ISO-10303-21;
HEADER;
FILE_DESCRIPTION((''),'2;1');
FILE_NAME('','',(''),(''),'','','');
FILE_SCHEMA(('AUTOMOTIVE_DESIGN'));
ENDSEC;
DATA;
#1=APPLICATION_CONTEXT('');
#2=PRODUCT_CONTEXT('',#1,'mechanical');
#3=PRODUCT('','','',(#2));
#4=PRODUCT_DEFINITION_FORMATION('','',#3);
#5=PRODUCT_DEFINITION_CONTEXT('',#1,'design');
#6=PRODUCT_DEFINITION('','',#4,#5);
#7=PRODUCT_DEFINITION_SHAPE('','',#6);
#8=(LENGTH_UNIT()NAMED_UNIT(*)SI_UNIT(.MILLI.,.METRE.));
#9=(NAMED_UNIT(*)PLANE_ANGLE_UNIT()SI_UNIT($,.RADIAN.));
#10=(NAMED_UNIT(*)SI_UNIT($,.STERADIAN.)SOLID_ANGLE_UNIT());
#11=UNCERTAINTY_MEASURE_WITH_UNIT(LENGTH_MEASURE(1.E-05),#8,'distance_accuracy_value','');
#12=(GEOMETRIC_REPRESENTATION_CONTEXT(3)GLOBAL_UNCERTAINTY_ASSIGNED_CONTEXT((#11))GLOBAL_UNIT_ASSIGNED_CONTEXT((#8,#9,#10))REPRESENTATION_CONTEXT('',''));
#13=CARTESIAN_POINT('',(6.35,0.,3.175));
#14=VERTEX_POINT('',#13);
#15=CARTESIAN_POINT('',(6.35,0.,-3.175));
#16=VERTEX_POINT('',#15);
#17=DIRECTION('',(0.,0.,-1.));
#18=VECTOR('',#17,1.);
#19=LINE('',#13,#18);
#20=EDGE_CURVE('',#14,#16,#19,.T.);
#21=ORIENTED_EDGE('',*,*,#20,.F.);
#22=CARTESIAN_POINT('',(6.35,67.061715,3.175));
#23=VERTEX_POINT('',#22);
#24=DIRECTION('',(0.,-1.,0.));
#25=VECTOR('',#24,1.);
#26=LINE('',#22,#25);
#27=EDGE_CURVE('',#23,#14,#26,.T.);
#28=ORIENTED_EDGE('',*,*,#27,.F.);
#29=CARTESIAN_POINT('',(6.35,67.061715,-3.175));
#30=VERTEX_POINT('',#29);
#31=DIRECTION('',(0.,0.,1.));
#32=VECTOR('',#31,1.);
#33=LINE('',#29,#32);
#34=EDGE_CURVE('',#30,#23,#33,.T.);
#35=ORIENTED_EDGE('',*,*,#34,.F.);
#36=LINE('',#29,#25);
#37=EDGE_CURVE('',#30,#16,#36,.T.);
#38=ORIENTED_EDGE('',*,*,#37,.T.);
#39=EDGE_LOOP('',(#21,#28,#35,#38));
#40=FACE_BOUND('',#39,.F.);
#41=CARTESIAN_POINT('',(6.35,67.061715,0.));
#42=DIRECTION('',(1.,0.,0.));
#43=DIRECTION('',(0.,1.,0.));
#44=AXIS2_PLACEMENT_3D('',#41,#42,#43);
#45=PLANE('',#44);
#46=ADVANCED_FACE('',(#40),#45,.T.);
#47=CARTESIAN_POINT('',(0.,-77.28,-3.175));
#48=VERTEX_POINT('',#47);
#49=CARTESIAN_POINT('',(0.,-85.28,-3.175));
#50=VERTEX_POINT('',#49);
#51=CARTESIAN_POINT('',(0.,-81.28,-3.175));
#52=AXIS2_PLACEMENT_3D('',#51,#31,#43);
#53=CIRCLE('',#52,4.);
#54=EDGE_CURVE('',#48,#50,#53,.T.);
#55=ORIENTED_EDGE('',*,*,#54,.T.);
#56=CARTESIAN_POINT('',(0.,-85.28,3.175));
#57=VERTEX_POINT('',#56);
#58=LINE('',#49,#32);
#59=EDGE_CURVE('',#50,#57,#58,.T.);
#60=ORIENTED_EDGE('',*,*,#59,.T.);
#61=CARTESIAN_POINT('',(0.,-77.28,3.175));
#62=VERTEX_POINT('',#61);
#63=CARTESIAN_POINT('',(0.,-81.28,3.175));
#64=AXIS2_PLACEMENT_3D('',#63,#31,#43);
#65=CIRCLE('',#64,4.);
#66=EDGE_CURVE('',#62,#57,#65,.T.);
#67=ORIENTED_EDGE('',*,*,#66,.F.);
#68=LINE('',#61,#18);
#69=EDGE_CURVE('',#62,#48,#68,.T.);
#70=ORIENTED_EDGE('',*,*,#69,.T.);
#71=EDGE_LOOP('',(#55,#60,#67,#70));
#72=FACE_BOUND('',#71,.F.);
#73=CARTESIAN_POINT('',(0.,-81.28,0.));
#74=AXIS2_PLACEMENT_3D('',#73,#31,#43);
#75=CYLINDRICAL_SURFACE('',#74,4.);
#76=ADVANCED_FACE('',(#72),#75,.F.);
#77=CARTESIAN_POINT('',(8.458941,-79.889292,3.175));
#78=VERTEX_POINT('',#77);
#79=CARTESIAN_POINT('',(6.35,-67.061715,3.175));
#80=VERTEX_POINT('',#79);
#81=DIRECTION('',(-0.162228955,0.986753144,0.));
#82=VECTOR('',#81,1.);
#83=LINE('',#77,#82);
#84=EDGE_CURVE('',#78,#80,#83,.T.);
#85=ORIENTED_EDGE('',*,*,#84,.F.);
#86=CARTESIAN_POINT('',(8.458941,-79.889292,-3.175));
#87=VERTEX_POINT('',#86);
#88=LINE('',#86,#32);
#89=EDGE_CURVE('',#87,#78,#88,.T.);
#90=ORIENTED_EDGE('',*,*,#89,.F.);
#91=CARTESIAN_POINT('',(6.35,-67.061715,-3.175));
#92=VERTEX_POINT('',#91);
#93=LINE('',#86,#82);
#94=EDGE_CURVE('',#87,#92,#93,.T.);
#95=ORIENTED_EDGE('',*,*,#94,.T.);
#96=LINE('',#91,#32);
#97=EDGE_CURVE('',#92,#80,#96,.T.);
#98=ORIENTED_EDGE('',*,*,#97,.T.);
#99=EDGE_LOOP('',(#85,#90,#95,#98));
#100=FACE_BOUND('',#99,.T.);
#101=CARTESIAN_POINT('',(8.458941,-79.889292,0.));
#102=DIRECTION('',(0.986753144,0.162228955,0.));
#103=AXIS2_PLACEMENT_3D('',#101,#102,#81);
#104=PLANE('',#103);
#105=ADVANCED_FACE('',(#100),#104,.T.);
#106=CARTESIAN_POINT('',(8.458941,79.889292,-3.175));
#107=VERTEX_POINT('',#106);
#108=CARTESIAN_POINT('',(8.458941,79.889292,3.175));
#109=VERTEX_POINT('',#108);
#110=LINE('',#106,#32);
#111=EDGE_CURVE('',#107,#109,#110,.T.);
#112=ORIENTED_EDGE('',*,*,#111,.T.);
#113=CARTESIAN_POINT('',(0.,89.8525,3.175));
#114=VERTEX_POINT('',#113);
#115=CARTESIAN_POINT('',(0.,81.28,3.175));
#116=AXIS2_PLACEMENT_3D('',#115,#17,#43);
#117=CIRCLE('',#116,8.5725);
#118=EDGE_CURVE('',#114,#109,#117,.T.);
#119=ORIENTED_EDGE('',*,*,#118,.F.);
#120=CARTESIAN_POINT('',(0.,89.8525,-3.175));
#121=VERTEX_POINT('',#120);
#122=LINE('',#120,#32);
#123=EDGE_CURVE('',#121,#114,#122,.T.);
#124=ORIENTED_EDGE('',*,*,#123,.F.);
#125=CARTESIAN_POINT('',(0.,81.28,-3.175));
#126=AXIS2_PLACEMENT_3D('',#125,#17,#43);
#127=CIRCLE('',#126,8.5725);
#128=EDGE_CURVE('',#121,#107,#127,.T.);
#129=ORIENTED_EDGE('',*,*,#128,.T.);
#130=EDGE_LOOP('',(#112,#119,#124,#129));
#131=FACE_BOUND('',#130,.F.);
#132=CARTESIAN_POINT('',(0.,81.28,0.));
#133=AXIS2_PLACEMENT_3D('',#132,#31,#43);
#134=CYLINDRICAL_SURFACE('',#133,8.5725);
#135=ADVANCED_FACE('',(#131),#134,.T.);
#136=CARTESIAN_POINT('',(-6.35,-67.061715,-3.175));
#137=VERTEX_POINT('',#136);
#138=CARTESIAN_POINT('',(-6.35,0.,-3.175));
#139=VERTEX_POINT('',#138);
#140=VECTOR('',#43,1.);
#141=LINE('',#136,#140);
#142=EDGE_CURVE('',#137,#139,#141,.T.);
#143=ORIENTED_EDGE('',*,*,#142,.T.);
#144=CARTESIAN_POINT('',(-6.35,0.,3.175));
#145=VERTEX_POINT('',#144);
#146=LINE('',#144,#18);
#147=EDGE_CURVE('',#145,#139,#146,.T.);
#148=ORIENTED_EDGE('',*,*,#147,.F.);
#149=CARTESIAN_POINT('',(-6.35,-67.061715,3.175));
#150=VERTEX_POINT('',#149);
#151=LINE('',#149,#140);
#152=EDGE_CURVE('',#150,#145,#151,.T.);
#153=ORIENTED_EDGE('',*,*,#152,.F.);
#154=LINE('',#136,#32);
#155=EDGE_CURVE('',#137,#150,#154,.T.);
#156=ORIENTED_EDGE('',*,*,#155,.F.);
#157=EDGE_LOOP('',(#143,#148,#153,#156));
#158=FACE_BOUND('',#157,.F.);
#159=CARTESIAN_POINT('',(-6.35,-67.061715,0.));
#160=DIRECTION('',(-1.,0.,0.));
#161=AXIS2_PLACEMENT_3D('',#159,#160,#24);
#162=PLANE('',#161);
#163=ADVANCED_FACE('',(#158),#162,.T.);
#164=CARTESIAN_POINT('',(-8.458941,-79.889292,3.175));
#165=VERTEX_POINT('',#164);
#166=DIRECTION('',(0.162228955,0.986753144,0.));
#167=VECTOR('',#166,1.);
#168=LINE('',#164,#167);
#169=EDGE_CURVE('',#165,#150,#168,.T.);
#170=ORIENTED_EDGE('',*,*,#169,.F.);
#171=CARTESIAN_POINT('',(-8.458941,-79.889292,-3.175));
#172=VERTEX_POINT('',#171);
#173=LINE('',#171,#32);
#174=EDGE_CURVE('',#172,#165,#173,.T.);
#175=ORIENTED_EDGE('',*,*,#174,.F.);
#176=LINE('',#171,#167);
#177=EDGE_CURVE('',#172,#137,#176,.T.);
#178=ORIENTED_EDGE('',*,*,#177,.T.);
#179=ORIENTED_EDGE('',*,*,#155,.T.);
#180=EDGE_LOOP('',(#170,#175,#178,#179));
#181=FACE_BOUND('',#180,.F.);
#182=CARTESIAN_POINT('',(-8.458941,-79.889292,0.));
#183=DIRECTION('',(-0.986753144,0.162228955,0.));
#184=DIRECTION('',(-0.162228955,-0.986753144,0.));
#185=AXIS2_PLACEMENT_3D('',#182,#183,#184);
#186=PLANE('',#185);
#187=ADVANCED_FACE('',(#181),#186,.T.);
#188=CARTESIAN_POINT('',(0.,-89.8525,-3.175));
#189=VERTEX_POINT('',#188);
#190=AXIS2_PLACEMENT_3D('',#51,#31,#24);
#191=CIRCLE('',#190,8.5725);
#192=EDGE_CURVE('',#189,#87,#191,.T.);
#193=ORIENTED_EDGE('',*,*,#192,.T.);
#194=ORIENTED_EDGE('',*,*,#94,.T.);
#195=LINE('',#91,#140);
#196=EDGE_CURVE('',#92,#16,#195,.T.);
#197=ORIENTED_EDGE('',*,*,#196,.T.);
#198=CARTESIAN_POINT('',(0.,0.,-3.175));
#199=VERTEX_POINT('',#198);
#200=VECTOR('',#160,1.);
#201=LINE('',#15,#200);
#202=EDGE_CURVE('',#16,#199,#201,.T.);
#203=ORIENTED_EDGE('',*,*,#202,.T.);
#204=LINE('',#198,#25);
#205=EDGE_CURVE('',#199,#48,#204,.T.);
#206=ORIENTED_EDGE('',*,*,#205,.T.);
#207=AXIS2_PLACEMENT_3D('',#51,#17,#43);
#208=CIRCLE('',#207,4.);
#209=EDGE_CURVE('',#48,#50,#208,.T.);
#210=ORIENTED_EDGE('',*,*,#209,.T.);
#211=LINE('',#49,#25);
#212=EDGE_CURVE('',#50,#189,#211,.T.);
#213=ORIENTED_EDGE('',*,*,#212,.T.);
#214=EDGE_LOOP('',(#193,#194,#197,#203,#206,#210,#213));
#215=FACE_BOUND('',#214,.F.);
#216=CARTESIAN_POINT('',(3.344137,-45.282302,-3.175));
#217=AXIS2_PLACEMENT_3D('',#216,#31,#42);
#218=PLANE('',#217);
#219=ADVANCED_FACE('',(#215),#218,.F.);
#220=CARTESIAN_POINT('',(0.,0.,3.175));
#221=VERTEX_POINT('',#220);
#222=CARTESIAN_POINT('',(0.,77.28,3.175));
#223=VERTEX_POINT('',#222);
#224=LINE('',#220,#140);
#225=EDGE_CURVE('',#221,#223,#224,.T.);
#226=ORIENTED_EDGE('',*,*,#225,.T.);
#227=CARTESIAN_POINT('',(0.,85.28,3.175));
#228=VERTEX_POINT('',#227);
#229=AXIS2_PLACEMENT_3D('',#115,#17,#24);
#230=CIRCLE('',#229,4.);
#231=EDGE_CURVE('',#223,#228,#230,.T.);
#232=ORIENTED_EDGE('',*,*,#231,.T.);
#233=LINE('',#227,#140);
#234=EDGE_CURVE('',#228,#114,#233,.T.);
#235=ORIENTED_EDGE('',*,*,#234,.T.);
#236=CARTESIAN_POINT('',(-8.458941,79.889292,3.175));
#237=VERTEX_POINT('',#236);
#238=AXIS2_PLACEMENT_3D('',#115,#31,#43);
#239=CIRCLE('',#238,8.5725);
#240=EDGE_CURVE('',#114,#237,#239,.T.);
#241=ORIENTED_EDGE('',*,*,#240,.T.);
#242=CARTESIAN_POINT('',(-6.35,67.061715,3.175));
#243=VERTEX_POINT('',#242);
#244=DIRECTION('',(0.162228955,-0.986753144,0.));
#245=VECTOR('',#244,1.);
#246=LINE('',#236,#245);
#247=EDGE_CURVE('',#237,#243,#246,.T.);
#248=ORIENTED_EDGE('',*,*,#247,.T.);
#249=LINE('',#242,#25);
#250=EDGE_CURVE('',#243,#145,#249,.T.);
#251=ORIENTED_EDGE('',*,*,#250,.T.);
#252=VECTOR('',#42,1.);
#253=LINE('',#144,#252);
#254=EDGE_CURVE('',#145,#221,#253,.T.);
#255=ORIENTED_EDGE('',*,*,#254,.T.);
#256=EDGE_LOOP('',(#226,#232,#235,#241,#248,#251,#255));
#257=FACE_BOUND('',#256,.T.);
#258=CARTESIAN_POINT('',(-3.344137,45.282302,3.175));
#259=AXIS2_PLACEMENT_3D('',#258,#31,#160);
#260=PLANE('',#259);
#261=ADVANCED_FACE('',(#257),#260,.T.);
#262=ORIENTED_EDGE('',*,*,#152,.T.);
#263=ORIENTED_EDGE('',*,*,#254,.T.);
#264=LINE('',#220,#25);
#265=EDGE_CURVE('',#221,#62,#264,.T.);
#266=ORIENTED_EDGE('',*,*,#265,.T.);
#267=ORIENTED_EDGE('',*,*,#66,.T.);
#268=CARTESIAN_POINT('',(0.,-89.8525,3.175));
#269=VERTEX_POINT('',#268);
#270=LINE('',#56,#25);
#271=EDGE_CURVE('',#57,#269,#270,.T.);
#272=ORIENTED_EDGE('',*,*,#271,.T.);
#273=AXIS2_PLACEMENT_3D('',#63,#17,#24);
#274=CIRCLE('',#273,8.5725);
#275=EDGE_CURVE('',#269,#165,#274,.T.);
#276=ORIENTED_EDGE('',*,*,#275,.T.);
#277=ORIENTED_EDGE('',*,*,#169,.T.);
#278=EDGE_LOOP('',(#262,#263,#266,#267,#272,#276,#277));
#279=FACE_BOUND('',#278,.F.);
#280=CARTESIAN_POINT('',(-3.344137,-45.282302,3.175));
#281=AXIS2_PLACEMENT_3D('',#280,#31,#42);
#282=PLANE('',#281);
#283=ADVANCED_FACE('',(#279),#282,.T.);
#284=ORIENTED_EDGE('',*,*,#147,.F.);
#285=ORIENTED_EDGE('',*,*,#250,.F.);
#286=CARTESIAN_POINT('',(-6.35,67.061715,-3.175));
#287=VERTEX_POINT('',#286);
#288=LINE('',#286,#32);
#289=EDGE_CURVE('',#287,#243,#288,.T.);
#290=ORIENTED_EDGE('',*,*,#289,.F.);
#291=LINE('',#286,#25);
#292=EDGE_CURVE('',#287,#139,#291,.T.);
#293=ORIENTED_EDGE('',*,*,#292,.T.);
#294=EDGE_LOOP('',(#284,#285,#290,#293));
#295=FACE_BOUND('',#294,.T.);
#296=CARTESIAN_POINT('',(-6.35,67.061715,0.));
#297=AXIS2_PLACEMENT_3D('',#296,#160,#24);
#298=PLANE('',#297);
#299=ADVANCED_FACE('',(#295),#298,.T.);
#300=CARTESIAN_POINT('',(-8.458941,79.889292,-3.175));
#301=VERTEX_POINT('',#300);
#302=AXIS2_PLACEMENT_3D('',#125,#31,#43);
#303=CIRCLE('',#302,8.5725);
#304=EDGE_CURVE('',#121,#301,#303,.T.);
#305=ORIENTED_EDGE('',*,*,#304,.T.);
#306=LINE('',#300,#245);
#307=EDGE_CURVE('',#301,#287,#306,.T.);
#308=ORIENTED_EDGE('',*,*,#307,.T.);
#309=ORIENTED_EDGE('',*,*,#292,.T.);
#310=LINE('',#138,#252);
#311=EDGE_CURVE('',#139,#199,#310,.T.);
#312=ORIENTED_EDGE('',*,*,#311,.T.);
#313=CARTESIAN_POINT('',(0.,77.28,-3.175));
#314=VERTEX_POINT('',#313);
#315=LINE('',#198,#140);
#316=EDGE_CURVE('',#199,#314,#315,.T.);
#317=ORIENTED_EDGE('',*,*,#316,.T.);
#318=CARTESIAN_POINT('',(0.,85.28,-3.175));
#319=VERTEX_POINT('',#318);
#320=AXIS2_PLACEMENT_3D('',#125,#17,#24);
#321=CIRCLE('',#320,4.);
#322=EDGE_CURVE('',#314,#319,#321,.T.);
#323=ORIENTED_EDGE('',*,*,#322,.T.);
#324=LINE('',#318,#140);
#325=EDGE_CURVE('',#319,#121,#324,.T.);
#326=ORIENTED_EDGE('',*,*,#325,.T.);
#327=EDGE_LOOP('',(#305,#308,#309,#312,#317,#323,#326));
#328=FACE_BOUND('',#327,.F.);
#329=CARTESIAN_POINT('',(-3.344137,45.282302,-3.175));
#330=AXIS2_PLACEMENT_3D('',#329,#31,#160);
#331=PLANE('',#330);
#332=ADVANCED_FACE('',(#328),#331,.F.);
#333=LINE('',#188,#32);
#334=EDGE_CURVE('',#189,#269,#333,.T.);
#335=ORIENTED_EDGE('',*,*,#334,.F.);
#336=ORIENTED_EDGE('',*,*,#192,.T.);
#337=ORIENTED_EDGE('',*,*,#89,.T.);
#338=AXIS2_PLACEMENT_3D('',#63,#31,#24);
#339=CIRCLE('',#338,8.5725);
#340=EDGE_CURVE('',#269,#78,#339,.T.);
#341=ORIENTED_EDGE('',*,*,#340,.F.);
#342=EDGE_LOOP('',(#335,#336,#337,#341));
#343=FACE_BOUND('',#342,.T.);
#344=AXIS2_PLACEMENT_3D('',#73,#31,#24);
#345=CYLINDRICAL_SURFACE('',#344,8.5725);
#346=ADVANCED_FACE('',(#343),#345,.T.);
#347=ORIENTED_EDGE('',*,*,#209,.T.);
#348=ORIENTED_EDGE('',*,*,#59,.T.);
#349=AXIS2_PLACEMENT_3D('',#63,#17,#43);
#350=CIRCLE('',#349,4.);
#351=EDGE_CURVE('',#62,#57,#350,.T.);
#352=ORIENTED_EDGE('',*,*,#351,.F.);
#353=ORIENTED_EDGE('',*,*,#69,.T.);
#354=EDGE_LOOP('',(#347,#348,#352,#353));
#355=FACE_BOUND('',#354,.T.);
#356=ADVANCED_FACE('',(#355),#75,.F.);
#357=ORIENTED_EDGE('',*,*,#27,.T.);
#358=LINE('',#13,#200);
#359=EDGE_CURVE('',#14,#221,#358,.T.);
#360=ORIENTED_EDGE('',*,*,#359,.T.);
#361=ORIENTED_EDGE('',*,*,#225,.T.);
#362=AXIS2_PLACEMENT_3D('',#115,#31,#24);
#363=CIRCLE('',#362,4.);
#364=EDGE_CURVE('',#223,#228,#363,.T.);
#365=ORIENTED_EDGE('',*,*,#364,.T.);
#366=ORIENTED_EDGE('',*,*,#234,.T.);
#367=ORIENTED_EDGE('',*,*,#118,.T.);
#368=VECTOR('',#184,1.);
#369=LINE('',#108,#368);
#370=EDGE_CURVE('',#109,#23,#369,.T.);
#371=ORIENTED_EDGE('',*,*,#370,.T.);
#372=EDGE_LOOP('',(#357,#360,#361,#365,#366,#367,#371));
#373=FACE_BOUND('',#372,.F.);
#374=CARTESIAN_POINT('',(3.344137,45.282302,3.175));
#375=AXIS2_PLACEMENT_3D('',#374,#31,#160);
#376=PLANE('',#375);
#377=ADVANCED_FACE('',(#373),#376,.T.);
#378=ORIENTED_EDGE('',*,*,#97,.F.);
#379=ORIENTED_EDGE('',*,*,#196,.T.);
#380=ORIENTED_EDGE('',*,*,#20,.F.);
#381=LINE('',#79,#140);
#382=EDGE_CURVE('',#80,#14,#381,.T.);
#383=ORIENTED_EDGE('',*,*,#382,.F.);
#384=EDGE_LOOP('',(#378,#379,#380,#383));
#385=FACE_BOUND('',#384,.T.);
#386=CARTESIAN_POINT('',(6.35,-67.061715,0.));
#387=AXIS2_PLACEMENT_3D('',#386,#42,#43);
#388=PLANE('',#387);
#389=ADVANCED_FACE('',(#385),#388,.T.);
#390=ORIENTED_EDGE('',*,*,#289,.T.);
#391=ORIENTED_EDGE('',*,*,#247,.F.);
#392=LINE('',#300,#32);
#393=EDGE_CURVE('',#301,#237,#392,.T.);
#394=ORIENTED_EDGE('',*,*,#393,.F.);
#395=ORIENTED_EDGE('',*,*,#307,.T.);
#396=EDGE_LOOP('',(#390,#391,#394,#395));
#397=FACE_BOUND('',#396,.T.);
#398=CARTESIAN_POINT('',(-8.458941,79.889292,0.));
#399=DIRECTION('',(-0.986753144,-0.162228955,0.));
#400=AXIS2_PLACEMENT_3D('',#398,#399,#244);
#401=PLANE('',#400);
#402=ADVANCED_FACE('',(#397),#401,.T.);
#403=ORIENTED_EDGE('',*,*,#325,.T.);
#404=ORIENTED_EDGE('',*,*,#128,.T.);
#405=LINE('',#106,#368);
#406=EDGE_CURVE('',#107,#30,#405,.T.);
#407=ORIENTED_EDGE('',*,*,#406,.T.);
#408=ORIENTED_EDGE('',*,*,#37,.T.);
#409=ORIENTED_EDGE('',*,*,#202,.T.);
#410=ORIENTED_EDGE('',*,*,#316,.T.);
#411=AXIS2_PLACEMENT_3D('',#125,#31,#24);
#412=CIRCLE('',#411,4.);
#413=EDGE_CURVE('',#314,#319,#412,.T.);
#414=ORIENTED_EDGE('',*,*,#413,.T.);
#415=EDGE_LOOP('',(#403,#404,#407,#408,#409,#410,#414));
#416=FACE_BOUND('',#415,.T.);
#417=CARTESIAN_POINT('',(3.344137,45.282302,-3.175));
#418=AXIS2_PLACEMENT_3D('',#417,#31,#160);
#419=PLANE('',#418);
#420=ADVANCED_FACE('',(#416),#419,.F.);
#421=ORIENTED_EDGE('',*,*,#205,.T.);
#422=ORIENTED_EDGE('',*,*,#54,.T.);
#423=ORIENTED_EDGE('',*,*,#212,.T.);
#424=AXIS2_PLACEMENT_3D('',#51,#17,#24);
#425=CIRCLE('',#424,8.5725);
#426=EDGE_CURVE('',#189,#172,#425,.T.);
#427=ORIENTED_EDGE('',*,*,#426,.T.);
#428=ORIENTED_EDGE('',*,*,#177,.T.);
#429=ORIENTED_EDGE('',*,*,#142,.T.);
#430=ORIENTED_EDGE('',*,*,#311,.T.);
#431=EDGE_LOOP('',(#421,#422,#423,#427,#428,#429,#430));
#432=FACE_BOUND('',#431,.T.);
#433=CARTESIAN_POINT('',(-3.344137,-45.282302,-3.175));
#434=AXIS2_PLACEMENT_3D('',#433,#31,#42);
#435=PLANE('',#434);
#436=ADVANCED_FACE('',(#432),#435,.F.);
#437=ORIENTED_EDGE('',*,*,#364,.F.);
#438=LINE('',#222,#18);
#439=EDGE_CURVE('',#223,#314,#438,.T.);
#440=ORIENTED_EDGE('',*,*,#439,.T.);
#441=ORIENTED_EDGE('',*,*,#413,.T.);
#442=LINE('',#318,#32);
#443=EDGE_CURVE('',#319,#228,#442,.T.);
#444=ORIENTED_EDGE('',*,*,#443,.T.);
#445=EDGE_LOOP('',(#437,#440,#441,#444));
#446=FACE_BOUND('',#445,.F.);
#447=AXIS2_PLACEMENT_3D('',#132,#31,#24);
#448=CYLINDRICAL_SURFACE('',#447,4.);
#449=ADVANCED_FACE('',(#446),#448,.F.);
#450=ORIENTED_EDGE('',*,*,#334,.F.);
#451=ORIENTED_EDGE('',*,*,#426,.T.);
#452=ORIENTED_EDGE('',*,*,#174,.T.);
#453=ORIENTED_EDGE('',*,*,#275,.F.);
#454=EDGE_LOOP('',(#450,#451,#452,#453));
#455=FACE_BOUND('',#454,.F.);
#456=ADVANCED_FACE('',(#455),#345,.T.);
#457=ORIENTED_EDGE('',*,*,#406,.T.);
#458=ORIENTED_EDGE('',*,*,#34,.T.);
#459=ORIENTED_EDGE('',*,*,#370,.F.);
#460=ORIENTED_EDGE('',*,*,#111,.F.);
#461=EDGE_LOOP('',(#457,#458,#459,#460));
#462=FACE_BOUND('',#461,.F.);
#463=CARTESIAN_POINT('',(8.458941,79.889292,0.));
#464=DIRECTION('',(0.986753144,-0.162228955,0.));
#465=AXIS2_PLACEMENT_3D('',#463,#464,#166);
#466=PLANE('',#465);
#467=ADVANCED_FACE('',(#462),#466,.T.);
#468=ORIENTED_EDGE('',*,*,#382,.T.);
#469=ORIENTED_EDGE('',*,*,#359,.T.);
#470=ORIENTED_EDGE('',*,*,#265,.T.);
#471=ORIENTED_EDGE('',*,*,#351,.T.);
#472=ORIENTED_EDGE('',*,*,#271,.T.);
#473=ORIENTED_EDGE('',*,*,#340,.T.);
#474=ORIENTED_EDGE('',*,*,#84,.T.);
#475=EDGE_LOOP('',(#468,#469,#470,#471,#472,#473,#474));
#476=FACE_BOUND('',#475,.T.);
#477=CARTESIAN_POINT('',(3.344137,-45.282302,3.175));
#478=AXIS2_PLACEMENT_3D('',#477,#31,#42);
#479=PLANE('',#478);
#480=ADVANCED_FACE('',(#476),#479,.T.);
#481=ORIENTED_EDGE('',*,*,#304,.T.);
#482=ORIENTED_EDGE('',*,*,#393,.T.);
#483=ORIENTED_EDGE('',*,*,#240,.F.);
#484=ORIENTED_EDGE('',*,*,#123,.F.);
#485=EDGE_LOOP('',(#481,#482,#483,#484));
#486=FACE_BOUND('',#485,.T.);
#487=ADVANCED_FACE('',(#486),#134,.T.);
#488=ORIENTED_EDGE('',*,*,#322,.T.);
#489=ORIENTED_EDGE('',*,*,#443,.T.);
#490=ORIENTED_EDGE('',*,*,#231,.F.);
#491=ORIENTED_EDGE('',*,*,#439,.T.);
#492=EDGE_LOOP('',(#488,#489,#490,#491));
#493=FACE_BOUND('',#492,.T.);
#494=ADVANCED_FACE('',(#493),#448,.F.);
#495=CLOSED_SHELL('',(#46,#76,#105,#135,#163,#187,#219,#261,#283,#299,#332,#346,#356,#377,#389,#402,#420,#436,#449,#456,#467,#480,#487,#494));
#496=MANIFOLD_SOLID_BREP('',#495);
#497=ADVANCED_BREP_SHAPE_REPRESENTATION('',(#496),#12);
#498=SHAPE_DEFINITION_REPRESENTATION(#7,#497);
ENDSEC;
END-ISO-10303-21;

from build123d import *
from build123d import SkipClean  # not in build123d's __all__

# Parameters (mm, degrees)
F1_DEPTH = 3.175


with BuildPart() as f1:
    # F0 (on Top) → F1 (new body, symmetric)
    with BuildSketch(Plane.XY):
        with BuildLine():
            ThreePointArc((0, -77.28), (4, -81.28), (0, -85.28))
            Line((0, -85.28), (0, -89.8525))
            ThreePointArc((0, -89.8525), (6.5348908987, -86.8282391073), (8.4589413231, -79.8892922874))
            Line((8.4589413231, -79.8892922874), (6.35, -67.061714828))
            Line((6.35, -67.061714828), (6.35, 0))
            Line((6.35, 0), (0, 0))
            Line((0, 0), (0, -77.28))
        make_face()
    extrude(amount=F1_DEPTH, both=True)

    # F2: F1 across plane


with BuildPart() as f1_1:
    add(f1.part, clean=False)
    with SkipClean():  # cleaning this boolean's faces spoils the solid; the shape is the same uncleaned
        add(f1.part.mirror(Plane.YZ), clean=False)

    # F3: F1 across plane


with BuildPart() as f1_2:
    add(f1_1.part, clean=False)
    add(f1_1.part.mirror(Plane.XZ), clean=False)


solid = f1_2.part
